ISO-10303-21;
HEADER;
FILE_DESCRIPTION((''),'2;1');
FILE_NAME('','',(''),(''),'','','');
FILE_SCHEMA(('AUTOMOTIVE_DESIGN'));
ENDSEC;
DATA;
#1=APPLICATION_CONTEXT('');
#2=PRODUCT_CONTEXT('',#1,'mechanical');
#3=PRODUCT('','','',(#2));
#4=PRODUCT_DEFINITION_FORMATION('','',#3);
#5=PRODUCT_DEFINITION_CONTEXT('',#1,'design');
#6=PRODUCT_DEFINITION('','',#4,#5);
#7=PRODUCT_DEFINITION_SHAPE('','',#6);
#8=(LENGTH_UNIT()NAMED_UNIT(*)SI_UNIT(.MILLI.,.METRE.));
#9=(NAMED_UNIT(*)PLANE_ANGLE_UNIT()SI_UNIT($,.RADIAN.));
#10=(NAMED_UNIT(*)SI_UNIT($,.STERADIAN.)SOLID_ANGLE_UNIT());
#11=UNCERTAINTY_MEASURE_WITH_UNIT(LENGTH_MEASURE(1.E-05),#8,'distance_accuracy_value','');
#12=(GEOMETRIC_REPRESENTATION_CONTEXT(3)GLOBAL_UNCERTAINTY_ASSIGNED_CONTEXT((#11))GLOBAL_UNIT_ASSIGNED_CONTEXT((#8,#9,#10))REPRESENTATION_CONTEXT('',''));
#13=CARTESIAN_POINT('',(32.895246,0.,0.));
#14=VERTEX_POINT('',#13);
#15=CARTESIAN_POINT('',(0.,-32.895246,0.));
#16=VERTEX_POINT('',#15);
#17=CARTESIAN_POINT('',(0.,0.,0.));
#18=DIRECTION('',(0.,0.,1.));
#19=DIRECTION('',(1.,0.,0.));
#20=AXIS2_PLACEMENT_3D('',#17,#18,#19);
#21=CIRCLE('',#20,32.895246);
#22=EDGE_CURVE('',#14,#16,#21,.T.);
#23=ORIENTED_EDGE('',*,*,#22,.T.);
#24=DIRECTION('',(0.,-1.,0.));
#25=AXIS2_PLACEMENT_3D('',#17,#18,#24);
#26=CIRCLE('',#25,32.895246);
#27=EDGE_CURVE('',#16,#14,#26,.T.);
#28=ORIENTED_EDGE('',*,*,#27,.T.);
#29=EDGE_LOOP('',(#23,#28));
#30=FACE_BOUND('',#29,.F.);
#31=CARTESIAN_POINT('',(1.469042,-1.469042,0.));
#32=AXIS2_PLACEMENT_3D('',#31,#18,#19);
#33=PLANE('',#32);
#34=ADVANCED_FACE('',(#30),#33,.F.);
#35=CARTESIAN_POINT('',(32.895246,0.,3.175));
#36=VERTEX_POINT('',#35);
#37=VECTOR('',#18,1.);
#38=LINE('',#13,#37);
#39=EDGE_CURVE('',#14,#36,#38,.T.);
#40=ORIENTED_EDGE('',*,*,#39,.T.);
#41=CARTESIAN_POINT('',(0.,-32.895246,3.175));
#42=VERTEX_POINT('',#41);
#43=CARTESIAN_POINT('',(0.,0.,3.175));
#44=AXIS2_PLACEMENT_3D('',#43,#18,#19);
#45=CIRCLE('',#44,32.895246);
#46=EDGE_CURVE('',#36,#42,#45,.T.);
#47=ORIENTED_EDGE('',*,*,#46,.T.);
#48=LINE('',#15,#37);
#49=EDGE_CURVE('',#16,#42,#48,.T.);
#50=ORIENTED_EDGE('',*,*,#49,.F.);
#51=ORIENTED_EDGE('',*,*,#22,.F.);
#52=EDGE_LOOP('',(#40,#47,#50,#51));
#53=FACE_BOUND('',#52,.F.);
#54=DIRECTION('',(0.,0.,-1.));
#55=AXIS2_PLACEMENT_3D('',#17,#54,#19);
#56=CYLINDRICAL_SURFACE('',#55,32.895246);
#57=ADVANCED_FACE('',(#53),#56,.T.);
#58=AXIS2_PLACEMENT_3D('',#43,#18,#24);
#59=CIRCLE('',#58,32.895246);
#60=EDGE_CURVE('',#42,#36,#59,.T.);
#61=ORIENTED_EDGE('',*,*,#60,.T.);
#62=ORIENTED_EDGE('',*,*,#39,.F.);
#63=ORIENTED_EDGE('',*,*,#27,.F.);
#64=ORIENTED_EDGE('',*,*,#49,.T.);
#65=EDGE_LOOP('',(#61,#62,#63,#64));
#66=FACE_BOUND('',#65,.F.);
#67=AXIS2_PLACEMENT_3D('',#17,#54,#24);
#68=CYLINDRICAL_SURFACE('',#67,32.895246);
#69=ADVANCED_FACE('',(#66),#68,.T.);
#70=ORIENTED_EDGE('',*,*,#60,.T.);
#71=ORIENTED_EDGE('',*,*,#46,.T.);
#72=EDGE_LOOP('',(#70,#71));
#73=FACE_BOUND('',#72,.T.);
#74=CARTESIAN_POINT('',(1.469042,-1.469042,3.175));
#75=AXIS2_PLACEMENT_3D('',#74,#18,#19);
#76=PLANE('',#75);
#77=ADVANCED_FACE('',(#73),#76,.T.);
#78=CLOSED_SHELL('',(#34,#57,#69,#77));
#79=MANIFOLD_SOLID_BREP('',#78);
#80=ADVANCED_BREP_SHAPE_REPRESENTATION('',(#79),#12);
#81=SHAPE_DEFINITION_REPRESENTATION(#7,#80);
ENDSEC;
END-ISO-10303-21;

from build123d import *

# Parameters (mm, degrees)
F1_DEPTH = 3.175


# Not quite as in the source:
# - the program builds the solid bodies; features that only make, move or delete a surface that nothing else refers to are left out


with BuildPart() as f1:
    # F0 (on Top) → F1 (new body)
    with BuildSketch(Plane.XY):
        with BuildLine():
            ThreePointArc((0, -32.8952459435), (23.2604514755, -23.2604514755), (32.8952459435, 0))
            ThreePointArc((32.8952459435, 0), (-23.2604514755, 23.2604514755), (0, -32.8952459435))
        make_face()
    extrude(amount=F1_DEPTH)


solid = f1.part
